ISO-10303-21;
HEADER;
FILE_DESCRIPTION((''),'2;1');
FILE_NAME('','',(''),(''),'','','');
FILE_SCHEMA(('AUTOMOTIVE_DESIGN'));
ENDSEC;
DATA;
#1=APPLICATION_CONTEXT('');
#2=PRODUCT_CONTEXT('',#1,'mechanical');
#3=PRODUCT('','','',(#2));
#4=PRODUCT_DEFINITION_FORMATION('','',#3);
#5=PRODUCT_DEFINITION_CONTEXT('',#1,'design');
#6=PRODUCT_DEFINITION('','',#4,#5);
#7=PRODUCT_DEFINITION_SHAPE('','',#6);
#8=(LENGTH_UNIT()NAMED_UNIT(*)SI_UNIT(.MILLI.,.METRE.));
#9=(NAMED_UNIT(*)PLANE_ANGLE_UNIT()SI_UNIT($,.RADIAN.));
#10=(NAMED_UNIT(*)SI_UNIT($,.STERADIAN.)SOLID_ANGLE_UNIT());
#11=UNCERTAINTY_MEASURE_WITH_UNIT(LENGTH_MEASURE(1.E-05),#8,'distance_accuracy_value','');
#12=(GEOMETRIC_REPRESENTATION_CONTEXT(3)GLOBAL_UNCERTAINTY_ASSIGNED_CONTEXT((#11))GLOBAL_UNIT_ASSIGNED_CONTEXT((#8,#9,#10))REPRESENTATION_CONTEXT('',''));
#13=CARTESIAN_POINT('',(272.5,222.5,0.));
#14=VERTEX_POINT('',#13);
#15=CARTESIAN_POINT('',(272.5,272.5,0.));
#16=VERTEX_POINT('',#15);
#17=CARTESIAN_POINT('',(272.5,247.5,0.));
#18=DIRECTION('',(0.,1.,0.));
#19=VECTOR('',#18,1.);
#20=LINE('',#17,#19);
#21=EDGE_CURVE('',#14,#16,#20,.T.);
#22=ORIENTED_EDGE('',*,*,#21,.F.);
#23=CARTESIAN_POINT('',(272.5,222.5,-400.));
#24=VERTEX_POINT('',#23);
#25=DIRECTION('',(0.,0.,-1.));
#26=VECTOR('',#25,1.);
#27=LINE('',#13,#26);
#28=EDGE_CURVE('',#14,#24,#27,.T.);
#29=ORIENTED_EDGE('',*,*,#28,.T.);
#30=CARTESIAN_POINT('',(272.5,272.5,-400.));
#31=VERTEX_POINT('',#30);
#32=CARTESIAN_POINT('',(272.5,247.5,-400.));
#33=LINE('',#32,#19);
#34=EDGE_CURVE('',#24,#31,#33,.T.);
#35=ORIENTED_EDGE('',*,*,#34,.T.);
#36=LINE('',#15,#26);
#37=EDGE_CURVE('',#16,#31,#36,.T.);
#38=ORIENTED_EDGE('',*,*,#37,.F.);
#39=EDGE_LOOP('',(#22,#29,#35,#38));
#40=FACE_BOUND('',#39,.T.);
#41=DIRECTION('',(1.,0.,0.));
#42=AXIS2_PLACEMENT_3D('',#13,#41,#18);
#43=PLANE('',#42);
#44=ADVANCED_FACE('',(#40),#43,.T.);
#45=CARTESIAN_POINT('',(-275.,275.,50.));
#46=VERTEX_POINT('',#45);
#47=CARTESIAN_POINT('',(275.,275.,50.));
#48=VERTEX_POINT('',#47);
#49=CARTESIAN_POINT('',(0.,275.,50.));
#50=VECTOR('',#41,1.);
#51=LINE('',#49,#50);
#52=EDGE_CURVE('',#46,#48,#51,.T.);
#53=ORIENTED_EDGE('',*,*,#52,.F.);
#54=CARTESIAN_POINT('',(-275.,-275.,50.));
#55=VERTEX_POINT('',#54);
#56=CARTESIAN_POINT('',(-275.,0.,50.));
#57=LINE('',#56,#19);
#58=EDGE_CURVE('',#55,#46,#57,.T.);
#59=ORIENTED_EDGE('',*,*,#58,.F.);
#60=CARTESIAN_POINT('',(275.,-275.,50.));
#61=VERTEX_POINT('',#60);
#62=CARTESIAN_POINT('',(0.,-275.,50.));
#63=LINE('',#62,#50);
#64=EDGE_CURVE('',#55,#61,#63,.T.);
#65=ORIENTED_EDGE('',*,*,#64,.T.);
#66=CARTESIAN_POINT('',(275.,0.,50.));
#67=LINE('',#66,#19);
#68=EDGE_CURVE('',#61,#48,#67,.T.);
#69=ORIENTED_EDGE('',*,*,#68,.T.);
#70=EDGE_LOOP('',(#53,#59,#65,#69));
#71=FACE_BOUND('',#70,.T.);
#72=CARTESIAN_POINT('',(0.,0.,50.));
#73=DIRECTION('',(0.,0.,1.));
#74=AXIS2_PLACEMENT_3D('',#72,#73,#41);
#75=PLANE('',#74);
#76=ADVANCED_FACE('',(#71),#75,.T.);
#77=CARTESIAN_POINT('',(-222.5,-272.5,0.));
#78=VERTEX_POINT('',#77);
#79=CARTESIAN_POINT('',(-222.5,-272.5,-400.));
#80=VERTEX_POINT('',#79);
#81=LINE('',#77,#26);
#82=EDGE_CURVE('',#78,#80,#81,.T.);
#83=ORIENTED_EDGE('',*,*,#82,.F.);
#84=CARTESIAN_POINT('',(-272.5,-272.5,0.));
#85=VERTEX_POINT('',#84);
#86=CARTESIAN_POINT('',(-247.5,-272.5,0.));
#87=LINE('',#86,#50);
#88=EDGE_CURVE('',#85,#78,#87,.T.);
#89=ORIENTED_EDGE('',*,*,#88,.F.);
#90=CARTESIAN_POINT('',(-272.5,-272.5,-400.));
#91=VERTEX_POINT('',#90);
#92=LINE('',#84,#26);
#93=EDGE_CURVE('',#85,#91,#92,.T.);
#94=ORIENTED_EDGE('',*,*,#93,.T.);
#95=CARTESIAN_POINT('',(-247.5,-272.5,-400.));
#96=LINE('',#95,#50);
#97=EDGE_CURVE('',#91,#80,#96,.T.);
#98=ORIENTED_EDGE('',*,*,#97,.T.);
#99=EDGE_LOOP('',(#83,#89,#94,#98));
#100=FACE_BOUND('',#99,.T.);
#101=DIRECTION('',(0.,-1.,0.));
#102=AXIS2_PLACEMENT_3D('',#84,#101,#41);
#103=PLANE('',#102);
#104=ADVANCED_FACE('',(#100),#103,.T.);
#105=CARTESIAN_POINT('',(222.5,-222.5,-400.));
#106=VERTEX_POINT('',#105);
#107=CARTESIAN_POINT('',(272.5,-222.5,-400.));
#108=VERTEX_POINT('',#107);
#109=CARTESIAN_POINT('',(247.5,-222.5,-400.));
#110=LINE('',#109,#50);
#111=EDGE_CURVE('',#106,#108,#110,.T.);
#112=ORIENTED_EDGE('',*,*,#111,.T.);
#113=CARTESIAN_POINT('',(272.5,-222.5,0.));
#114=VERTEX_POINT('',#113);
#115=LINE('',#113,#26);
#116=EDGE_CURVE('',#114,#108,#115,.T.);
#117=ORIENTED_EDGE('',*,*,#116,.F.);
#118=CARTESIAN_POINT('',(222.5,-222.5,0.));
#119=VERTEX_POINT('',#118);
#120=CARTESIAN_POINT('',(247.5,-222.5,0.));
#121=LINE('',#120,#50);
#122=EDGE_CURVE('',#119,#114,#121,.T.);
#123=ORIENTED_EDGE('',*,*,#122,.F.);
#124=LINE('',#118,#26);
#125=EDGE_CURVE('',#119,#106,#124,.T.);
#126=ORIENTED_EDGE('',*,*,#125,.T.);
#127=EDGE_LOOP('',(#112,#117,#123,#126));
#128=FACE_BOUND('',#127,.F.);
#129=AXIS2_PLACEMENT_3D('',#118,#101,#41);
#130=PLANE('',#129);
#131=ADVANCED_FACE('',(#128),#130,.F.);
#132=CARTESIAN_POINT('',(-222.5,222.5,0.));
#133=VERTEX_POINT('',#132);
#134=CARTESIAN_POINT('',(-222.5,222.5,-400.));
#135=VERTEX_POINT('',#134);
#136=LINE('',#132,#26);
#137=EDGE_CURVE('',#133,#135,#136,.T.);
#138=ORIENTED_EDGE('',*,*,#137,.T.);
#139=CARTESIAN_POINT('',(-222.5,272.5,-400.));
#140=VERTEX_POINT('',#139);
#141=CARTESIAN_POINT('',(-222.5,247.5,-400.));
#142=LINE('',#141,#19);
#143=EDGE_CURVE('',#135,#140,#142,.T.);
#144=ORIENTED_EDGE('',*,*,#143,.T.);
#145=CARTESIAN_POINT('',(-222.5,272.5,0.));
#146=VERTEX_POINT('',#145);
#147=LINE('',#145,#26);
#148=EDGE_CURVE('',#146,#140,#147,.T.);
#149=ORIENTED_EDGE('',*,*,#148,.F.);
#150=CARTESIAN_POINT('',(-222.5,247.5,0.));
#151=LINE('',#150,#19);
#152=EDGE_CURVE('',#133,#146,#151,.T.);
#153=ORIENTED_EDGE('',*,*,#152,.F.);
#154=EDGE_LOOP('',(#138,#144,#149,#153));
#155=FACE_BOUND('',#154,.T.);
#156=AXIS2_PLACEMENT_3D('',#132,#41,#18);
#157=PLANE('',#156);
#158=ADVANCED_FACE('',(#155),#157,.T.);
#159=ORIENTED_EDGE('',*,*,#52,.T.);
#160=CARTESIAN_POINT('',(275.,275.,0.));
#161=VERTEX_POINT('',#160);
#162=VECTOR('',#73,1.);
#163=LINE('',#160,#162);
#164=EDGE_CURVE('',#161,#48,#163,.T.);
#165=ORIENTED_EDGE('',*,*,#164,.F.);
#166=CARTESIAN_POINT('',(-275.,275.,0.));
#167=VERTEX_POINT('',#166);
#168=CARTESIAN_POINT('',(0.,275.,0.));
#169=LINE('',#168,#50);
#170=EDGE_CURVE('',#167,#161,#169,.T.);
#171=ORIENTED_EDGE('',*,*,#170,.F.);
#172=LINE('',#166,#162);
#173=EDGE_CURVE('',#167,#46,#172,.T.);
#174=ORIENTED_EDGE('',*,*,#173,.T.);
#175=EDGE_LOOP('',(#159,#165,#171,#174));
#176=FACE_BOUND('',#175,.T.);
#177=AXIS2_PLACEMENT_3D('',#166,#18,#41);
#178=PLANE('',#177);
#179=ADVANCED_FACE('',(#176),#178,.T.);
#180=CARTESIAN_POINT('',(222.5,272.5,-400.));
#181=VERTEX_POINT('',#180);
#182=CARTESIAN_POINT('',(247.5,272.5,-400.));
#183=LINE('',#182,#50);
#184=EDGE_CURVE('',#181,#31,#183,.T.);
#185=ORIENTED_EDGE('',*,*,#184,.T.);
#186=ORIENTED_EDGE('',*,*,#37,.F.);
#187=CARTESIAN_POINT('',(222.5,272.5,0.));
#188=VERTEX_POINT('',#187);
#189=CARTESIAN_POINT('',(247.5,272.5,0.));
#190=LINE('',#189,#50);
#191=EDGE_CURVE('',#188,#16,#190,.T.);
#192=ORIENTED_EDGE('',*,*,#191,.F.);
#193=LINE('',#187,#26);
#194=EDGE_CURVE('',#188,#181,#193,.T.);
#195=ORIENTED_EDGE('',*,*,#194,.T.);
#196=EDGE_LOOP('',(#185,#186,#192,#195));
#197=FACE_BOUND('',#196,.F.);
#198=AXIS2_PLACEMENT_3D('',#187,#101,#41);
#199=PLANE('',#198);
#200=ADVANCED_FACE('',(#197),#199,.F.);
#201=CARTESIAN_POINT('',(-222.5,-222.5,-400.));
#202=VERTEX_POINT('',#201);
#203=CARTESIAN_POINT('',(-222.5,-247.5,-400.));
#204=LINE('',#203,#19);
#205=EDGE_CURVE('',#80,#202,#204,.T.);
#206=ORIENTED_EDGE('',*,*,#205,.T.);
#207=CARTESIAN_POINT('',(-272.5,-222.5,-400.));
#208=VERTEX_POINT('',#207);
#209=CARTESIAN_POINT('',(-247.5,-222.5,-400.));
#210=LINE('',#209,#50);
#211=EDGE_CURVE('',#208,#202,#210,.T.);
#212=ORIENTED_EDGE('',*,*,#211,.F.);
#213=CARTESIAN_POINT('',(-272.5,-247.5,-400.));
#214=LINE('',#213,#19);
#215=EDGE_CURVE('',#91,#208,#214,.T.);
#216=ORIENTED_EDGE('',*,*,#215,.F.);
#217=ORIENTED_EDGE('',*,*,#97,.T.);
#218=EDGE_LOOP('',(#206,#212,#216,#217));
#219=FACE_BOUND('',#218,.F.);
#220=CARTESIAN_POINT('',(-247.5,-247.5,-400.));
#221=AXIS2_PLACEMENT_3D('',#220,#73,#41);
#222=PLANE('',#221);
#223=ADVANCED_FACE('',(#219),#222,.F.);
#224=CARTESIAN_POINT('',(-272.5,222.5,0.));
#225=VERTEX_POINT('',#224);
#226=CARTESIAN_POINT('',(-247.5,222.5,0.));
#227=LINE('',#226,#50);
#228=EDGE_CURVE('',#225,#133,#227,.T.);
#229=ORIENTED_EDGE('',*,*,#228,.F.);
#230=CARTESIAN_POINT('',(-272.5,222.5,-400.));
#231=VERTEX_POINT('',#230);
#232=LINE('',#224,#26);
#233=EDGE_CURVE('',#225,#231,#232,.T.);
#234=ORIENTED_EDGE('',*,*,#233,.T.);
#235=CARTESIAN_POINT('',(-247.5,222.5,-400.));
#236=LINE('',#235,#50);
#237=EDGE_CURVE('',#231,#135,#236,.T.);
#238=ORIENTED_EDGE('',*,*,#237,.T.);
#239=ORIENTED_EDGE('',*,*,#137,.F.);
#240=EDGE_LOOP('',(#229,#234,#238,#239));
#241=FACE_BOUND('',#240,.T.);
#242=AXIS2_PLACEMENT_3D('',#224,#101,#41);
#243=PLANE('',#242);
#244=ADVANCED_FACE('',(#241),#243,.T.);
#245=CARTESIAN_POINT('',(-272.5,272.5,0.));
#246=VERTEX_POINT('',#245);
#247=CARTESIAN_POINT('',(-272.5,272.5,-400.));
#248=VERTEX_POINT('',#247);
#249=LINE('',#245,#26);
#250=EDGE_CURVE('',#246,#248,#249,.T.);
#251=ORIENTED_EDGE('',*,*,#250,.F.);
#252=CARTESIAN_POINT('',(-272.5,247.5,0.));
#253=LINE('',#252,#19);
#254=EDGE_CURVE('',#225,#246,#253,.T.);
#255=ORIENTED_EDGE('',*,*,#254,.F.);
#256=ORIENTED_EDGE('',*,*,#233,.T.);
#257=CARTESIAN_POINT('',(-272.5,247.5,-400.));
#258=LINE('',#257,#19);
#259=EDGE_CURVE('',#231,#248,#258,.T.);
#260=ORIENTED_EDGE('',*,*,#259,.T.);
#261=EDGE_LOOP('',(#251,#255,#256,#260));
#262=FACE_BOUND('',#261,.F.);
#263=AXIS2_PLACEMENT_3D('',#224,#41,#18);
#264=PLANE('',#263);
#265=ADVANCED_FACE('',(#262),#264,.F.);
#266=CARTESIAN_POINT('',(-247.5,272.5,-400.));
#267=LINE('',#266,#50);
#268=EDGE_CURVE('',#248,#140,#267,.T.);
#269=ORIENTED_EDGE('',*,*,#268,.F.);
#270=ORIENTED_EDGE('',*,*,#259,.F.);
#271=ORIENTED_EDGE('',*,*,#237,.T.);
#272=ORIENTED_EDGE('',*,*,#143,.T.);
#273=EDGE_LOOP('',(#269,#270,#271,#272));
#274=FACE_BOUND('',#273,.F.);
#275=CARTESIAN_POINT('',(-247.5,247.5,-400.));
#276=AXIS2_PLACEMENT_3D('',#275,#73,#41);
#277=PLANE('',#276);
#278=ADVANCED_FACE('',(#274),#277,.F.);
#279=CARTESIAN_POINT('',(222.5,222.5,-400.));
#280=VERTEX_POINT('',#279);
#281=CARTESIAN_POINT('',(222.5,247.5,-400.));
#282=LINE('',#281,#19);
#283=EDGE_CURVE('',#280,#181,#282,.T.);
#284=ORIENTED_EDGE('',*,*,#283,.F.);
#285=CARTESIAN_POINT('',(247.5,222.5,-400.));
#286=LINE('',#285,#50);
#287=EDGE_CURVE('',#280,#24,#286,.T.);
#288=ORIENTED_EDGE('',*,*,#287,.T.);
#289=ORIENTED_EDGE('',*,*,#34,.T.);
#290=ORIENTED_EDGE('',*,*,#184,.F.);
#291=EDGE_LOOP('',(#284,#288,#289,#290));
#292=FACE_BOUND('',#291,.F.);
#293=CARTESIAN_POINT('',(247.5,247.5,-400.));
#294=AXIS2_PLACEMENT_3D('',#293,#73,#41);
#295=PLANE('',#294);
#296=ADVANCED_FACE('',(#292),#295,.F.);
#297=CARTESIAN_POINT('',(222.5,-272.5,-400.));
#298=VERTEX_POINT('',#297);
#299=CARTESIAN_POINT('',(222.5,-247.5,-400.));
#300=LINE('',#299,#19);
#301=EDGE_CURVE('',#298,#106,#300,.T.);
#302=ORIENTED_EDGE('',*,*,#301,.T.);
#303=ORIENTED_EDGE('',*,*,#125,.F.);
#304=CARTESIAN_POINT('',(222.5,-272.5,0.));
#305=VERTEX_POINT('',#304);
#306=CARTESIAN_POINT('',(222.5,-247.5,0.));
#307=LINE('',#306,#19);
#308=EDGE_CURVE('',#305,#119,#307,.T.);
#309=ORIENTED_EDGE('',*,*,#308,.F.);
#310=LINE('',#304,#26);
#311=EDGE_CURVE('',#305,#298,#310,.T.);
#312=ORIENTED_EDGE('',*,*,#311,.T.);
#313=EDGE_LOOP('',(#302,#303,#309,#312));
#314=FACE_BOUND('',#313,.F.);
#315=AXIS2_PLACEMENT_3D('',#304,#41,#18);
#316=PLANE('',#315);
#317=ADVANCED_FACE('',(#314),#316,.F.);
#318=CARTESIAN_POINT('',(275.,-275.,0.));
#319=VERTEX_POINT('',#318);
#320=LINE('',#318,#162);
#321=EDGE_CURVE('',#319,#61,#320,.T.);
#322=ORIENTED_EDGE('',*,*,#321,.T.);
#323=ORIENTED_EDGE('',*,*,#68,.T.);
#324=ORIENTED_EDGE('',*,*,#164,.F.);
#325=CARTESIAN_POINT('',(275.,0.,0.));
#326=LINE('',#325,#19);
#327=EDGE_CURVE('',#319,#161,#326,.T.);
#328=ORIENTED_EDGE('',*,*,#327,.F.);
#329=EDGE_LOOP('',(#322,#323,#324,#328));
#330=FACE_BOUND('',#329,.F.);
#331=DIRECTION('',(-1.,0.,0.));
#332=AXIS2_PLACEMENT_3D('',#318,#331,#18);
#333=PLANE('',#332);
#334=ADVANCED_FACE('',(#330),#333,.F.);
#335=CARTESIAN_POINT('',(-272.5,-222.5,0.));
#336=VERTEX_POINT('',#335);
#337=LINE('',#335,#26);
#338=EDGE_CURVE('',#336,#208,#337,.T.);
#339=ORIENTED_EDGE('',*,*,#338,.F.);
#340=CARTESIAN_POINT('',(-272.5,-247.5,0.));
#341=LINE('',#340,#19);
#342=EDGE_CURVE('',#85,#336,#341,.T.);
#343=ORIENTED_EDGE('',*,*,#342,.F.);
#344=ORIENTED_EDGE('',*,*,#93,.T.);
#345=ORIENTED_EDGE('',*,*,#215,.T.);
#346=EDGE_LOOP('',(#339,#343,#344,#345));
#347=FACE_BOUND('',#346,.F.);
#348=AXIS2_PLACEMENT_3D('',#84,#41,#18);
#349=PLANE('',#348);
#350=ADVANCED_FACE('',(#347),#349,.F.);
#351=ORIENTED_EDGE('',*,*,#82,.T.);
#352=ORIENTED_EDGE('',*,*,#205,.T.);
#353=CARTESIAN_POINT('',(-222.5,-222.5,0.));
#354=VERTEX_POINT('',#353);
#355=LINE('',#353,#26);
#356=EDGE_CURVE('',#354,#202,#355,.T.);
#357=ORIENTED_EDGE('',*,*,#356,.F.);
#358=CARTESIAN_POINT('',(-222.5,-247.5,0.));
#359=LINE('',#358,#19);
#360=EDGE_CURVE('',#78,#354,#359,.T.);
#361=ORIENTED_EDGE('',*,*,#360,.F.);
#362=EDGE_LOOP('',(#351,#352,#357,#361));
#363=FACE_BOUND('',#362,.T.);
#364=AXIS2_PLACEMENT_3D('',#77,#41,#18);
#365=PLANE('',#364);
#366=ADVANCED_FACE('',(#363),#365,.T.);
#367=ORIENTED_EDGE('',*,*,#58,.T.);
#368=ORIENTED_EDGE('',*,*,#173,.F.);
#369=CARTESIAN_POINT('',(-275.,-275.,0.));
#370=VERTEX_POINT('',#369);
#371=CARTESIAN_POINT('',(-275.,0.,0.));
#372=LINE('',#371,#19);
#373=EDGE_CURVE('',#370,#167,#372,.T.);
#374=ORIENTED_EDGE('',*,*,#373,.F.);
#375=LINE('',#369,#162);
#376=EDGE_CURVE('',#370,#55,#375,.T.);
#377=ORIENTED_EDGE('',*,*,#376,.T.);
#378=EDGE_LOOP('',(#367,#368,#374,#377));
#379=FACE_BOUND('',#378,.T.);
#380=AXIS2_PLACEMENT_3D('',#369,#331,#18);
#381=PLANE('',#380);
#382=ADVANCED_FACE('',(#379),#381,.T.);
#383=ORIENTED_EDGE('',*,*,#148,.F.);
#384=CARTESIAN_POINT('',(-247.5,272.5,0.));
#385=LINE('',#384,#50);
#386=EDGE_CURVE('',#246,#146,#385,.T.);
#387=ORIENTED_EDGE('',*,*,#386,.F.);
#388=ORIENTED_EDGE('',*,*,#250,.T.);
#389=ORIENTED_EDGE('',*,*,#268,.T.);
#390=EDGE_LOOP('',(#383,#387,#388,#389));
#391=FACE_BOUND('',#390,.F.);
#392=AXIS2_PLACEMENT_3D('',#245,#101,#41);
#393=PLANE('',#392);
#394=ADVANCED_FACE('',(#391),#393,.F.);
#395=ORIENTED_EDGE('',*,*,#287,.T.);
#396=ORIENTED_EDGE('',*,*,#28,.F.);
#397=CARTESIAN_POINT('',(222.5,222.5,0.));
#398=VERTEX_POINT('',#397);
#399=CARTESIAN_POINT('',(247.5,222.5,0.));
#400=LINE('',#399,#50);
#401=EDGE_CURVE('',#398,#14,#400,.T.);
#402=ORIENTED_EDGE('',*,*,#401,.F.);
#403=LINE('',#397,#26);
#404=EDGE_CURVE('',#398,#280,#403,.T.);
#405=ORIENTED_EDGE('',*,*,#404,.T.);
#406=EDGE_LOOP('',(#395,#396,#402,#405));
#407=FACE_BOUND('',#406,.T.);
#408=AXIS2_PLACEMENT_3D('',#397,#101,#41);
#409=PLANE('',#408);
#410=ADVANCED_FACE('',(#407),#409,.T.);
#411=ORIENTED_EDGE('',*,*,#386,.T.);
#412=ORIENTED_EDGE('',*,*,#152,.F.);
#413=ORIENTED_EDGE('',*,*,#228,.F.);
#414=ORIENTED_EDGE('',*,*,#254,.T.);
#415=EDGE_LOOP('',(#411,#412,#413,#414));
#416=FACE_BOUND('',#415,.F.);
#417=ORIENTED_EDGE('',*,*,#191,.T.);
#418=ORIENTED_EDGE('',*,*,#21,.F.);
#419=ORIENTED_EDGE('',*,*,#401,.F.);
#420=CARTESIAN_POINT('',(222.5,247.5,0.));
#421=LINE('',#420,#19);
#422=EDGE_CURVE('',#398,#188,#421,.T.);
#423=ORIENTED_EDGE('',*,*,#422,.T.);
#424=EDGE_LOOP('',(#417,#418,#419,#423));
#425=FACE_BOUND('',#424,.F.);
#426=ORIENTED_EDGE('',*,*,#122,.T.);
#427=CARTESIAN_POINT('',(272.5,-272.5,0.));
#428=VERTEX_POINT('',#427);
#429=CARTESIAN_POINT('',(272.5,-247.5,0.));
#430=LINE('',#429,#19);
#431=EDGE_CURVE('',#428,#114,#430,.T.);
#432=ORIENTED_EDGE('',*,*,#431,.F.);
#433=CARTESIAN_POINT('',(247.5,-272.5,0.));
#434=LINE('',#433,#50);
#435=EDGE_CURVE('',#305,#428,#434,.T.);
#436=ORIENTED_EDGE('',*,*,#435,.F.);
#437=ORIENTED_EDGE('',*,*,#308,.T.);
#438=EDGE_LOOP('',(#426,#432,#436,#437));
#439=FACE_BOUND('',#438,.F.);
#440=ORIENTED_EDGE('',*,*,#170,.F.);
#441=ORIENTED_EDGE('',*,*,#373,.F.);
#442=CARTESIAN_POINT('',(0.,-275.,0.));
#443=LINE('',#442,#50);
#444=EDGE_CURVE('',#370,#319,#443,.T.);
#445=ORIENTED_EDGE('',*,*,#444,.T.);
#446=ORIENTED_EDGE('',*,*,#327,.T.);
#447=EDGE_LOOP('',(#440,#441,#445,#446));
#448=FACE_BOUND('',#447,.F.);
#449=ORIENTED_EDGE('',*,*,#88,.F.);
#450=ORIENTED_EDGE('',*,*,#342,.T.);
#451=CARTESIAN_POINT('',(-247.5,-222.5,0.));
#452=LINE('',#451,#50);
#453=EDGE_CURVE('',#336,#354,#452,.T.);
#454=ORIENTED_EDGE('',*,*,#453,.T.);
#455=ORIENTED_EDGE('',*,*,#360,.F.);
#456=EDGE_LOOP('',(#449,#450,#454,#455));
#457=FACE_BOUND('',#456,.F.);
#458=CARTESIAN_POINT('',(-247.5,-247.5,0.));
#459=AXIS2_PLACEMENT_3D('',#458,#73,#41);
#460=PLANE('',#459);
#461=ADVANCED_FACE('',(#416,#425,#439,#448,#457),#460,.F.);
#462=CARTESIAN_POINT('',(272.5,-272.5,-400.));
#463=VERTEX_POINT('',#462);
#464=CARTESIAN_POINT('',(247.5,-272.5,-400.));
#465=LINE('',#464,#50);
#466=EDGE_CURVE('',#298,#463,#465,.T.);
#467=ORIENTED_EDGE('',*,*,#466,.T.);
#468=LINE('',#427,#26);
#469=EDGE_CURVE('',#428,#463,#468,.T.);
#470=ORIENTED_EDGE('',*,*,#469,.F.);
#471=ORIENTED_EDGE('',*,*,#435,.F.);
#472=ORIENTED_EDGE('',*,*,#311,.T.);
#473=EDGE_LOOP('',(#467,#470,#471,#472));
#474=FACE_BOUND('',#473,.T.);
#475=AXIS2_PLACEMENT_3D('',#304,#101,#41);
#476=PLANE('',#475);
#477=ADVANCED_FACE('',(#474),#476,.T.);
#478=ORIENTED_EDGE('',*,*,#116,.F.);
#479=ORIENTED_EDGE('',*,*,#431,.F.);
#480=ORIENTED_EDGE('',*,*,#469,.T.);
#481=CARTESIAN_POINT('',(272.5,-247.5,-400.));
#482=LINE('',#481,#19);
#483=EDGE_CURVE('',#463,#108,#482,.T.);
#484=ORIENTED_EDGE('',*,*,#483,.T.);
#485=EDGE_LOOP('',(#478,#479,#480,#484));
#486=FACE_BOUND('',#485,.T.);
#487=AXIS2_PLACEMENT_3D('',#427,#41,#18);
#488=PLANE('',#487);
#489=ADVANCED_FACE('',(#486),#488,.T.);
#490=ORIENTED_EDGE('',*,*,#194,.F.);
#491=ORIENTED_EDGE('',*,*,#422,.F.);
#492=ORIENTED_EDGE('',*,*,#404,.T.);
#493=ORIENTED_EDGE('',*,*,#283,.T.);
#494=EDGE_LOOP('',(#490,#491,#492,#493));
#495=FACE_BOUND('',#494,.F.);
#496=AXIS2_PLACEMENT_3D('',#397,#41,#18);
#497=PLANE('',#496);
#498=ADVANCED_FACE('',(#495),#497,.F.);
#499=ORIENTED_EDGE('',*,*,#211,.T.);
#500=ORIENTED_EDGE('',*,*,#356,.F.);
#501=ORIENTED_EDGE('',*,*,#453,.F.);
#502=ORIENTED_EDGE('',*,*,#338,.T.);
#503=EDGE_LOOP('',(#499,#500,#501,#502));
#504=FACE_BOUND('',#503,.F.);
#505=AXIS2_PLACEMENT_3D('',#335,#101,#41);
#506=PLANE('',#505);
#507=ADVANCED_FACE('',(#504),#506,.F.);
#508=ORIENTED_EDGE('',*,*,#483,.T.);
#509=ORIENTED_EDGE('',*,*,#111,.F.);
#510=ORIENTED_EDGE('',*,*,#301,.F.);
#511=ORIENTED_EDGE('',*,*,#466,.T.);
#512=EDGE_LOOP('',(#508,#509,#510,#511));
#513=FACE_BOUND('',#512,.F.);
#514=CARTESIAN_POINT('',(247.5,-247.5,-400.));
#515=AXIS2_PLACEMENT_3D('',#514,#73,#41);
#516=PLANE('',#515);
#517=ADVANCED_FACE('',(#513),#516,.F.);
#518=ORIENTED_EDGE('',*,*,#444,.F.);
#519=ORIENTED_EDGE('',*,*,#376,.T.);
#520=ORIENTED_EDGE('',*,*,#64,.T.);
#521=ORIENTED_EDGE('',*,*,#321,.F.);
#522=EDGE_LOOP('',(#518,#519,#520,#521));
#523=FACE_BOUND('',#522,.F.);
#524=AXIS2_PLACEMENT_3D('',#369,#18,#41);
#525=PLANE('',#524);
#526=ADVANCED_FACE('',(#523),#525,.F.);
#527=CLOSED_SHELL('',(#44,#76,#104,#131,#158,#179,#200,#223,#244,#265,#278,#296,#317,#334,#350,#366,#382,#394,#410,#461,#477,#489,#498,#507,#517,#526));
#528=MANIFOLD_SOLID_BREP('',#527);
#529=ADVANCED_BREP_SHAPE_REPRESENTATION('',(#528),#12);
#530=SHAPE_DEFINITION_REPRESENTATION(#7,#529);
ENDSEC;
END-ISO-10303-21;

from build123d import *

# Parameters (mm, degrees)
F0_W          = 550
F0_H          = 550
F1_DEPTH      = 50
F0_W_2        = 50
F0_H_2        = 50
F2_DEPTH      = 50
F2_DEPTH_BACK = 400


with BuildPart() as f1:
    # F0 (on Top) → F1 (new body)
    with BuildSketch(Plane.XY):
        Rectangle(F0_W, F0_H)
        Polygon((222.5, 272.5), (272.5, 272.5), (272.5, 222.5), (272.5, -222.5), (272.5, -272.5), (222.5, -272.5), (-222.5, -272.5), (-272.5, -272.5), (-272.5, -222.5), (-272.5, 222.5), (-272.5, 272.5), (-222.5, 272.5), align=None, mode=Mode.SUBTRACT)
        Polygon((222.5, 222.5), (222.5, 272.5), (-222.5, 272.5), (-222.5, 222.5), (-272.5, 222.5), (-272.5, -222.5), (-222.5, -222.5), (-222.5, -272.5), (222.5, -272.5), (222.5, -222.5), (272.5, -222.5), (272.5, 222.5), align=None)
    extrude(amount=F1_DEPTH)

    # F0 (on Top) → F2 (join, two sides)
    with BuildSketch(Plane.XY) as f2_sk:
        with Locations((-247.5, -247.5)):
            Rectangle(F0_W_2, F0_H_2)
        with Locations((247.5, -247.5)):
            Rectangle(F0_W_2, F0_H_2)
        with Locations((247.5, 247.5)):
            Rectangle(F0_W_2, F0_H_2)
        with Locations((-247.5, 247.5)):
            Rectangle(F0_W_2, F0_H_2)
    extrude(amount=F2_DEPTH)
    extrude(f2_sk.sketch, amount=-F2_DEPTH_BACK)


solid = f1.part
